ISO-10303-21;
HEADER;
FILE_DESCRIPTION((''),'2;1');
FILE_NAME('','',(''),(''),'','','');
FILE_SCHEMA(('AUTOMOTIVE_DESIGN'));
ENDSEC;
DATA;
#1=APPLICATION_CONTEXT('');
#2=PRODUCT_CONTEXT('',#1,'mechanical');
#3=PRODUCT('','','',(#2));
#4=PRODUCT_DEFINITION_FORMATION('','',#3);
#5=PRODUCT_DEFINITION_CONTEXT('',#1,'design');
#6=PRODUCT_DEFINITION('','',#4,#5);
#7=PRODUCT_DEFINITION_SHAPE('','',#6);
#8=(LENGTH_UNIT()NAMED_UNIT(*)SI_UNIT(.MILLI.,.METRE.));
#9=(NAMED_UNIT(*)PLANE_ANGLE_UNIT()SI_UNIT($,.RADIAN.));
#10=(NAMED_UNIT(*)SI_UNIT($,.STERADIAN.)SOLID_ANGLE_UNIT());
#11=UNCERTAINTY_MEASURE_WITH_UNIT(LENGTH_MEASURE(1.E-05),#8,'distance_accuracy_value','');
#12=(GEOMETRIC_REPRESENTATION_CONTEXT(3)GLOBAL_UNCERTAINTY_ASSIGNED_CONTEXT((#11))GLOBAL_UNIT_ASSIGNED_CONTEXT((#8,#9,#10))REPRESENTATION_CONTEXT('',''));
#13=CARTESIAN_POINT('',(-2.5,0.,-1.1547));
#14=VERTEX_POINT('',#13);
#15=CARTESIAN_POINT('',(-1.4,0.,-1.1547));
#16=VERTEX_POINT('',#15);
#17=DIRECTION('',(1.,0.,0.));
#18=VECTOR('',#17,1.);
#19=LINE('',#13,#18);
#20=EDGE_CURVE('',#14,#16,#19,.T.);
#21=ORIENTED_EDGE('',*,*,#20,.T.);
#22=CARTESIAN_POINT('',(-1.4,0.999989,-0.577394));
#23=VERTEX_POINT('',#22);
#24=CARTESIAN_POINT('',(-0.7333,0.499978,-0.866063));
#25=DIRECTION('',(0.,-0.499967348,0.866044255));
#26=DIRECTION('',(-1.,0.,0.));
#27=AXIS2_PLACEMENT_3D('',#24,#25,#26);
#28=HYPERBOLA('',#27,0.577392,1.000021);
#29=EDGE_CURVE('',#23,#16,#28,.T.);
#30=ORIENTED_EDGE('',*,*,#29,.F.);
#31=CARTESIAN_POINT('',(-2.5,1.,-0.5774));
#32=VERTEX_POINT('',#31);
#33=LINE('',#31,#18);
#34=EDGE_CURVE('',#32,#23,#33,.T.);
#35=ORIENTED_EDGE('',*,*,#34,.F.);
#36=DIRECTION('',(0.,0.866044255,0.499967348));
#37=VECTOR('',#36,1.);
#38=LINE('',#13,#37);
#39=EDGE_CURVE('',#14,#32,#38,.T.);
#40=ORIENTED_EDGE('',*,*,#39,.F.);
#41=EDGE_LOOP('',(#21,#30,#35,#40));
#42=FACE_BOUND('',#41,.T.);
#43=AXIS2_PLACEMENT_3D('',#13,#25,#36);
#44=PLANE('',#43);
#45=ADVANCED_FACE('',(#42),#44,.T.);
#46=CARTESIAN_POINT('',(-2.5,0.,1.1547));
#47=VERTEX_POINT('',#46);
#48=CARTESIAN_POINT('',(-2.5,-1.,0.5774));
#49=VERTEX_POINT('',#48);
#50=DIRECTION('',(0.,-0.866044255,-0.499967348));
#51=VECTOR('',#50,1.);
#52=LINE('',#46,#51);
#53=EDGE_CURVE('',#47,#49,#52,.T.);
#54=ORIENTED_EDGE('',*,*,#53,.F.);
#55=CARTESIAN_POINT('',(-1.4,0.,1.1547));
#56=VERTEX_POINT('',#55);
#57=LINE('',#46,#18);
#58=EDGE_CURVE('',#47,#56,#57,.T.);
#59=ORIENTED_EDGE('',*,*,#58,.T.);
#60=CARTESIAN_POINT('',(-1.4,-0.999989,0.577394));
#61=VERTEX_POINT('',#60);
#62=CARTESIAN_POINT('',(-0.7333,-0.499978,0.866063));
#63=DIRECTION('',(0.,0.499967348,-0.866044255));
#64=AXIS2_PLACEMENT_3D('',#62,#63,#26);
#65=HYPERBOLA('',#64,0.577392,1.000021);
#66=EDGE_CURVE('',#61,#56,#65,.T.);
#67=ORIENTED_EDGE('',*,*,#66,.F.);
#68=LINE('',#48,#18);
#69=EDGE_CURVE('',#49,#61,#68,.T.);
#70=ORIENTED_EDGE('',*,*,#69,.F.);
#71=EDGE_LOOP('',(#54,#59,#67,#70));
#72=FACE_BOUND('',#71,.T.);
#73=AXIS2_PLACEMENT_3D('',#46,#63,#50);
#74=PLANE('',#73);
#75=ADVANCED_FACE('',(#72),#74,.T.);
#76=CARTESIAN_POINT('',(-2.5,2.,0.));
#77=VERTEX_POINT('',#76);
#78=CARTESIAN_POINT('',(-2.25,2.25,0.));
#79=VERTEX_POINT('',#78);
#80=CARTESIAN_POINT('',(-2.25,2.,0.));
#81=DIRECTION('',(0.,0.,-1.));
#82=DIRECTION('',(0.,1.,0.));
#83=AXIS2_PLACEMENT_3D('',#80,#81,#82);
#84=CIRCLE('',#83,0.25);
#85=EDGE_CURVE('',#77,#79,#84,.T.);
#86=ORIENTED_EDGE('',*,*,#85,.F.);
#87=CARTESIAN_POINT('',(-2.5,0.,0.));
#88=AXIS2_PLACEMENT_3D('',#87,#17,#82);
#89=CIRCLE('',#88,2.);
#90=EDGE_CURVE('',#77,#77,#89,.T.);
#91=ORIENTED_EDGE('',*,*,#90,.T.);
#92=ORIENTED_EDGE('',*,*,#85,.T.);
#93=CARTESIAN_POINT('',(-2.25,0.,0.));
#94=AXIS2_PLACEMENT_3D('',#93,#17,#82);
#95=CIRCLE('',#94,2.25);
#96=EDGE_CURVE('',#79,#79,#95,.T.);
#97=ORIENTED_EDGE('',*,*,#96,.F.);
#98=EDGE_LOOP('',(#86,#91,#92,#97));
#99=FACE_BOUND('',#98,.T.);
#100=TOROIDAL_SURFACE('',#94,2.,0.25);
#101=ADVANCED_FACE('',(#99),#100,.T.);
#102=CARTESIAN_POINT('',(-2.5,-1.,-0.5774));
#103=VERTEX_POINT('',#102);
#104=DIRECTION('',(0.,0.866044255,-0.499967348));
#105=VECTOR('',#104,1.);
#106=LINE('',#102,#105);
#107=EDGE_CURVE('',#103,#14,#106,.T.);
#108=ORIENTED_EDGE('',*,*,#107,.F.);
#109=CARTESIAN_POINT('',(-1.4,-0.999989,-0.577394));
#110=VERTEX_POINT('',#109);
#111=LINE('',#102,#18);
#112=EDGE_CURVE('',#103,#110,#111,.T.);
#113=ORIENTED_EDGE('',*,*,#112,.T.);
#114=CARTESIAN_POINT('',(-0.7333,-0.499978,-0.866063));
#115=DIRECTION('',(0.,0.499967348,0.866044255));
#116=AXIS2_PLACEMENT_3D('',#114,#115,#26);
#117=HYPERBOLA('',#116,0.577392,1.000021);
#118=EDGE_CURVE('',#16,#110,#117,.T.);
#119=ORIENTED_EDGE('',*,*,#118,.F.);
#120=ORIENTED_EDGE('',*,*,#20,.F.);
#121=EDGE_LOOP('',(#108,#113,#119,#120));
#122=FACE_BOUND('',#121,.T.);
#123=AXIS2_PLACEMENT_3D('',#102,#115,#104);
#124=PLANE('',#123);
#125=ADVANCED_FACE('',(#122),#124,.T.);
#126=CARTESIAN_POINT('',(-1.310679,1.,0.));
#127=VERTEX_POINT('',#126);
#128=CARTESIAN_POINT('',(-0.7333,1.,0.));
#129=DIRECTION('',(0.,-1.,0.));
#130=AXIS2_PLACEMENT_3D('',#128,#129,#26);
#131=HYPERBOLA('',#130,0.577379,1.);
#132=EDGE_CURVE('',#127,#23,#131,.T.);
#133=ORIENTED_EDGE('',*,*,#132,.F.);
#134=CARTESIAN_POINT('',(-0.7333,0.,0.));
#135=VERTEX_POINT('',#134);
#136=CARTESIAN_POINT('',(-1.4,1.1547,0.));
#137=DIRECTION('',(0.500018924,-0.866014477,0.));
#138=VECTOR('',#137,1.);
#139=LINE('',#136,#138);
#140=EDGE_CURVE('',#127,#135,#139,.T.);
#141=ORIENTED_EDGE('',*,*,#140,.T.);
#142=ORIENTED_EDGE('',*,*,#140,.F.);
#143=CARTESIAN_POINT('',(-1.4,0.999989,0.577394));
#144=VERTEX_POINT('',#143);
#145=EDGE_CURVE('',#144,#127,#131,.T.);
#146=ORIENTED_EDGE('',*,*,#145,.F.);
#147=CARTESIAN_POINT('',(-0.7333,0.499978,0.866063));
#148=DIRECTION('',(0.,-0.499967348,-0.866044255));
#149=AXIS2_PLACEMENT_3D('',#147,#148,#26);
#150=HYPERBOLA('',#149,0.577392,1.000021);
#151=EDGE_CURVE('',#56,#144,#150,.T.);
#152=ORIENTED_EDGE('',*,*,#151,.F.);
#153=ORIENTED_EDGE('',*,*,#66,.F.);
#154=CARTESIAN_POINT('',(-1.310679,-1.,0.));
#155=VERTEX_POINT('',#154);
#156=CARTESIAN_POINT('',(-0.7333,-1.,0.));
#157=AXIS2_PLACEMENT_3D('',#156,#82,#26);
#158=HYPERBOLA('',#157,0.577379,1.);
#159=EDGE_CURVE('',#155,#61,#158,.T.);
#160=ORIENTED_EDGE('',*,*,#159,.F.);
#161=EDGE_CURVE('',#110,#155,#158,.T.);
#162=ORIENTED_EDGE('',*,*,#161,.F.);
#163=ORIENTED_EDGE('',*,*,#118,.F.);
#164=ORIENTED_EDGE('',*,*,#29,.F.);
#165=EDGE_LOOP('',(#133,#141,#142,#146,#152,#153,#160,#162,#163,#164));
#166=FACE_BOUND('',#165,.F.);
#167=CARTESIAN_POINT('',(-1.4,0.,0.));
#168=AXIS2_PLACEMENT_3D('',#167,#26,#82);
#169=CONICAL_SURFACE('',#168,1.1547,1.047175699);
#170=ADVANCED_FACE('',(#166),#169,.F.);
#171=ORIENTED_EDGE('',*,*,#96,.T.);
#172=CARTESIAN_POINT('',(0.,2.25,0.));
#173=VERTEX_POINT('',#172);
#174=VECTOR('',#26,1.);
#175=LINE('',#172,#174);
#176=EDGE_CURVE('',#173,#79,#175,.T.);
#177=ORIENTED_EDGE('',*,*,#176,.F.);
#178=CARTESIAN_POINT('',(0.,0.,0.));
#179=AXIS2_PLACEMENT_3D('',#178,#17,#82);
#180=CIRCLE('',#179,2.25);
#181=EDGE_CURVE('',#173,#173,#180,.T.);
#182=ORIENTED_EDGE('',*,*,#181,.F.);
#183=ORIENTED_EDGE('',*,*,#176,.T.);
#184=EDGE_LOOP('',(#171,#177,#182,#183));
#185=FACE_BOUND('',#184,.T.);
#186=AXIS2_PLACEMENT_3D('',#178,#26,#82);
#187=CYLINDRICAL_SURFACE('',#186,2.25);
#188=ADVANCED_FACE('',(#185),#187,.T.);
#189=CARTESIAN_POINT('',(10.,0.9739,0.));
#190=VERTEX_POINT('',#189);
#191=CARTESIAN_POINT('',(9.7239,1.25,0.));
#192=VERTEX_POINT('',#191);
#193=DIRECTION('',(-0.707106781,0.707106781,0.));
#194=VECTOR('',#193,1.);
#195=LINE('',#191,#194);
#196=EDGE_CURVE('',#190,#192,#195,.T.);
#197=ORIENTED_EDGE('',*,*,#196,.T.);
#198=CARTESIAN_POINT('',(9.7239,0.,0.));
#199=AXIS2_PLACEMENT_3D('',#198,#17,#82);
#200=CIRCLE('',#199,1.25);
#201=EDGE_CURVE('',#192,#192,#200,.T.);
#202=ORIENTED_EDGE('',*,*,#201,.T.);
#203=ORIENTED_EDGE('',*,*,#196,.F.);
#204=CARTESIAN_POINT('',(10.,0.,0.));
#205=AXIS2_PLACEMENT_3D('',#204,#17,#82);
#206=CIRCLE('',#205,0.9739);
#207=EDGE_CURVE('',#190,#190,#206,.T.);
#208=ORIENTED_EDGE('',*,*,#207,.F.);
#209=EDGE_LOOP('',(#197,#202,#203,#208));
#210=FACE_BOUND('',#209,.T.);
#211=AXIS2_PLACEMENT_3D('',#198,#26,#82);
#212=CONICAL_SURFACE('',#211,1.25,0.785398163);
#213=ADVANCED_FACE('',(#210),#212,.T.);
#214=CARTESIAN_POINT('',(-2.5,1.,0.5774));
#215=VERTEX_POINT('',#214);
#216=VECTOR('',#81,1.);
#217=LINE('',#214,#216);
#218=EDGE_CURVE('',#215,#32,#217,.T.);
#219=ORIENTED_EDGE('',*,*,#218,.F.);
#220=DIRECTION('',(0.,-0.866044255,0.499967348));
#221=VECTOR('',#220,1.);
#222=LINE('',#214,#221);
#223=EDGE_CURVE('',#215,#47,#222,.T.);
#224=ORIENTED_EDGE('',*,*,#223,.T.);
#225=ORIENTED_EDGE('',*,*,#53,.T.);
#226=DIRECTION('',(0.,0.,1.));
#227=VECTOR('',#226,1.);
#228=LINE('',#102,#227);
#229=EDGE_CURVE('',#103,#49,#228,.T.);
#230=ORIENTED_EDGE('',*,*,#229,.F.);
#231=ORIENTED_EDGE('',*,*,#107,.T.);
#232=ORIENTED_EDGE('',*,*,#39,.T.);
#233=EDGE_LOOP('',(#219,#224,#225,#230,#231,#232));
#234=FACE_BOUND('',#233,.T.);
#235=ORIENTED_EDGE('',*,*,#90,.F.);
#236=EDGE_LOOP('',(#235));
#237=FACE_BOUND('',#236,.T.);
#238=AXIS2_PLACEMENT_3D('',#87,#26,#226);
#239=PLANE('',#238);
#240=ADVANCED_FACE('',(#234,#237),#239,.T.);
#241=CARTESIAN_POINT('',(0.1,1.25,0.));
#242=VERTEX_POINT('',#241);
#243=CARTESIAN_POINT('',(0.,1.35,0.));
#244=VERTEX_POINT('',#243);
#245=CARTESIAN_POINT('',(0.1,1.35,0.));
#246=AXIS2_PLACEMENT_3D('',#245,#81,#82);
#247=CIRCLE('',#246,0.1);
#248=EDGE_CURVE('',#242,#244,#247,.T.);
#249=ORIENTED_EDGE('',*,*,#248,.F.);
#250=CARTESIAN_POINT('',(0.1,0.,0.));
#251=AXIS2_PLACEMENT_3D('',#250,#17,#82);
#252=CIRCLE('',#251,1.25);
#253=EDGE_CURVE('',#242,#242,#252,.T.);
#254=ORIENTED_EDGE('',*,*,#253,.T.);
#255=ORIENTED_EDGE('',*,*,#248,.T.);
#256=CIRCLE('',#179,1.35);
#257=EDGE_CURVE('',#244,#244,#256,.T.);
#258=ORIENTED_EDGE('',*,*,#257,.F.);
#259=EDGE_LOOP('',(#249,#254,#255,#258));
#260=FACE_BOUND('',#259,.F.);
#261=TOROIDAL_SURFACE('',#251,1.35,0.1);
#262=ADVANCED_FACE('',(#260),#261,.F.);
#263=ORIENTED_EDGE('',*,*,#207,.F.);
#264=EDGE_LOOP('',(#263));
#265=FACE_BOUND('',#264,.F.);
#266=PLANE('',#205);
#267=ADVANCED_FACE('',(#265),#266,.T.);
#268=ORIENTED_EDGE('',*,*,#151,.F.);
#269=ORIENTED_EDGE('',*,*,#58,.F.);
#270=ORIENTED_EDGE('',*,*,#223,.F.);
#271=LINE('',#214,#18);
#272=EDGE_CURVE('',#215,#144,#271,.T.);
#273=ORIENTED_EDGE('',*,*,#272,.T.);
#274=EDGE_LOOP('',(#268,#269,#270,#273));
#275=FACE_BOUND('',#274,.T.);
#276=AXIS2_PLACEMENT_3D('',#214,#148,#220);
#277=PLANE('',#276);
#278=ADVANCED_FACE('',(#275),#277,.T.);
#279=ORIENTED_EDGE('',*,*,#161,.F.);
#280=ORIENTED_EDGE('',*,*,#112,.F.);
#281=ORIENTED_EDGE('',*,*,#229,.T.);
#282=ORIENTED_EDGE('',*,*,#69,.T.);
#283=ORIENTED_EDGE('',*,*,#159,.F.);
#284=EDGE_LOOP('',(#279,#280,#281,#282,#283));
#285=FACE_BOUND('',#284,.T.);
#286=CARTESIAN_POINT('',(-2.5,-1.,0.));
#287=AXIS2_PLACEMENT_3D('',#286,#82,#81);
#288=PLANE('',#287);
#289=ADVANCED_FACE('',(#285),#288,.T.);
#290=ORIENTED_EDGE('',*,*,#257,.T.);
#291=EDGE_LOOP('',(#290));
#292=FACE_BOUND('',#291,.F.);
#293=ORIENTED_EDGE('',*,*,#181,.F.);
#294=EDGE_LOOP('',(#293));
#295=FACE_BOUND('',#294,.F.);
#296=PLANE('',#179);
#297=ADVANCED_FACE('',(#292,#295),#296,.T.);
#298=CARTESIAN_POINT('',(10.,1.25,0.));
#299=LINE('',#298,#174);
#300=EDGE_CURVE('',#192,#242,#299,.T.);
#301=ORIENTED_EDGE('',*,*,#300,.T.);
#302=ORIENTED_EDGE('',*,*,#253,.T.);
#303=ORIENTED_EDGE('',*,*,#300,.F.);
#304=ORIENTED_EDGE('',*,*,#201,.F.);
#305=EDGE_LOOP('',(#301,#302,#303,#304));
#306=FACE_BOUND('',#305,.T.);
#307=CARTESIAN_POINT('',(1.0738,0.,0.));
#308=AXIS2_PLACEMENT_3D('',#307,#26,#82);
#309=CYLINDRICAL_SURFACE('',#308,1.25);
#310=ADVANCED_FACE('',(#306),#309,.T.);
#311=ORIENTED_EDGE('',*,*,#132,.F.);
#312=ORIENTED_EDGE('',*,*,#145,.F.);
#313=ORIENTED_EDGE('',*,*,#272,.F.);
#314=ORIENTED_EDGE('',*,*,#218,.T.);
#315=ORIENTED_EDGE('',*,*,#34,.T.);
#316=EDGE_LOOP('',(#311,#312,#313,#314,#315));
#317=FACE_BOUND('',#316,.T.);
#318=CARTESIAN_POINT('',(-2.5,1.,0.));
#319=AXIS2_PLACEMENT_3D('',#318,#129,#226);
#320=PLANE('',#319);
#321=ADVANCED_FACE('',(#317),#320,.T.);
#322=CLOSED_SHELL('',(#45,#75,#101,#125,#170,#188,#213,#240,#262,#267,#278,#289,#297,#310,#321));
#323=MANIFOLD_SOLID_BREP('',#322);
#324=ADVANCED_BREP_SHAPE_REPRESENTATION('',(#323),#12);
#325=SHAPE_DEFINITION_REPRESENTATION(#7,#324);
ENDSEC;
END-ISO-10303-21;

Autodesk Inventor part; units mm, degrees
ref_plane "YZ Plane" through (0, 0, 0) normal (1, 0, 0) x (0, 1, 0)
ref_plane "XZ Plane" through (0, 0, 0) normal (0, 1, 0) x (-1, 0, 0)
sketch "Skizze1" plane through (0, 0, 0) normal (0, 0, 1) x (1, 0, 0)
  line L0 (-0.7333, 0) -> (10, 0)
  line L1 (10, 0) -> (10, 1.25)
  line L2 (10, 1.25) -> (1.35, 1.25)
  line L3 (1.35, 1.25) -> (1.0738, 1.25)
  line L4 (1.0738, 1.25) -> (0, 1.25)
  line L5 (0, 1.25) -> (0, 2.25)
  line L6 (0, 2.25) -> (-2.5, 2.25)
  line L7 (-2.5, 2.25) -> (-2.5, 1.1547)
  line L8 (-2.5, 1.1547) -> (-1.4, 1.1547)
  line L9 (-1.4, 1.1547) -> (-0.7333, 0)
  line L10 (-5, 0) -> (12.5, 0) projected
  line L11 (0, -0.45) -> (0, 2.7) projected
  line L12 (1.35, 1.25) -> (0, 1.25) construction
  dimension "d1" = 8.65
  dimension "d2" = 0.2762
  dimension "d3" = 2.5
  dimension "d4" = 1.1
  dimension "d5" = 60
  dimension "d6" = 2.5
  dimension "d7" = 2.5
  dimension "d8" = 2.3094
  dimension "d9" = 4.5
  dimension "d26" = 10
revolve "Körper" add sketch "Skizze1" angle 360 about axis through (-0.7333, 0, 0) along (1, 0, 0)
sketch "Skizze2" plane through (-2.5, 0, 0) normal (-1, 0, 0) x (0, 0, 1)
  circle A0 centre (0, 0) radius 1.1547 projected
  line L0 (0, -3.15) -> (0, 3.15) projected
  line L1 (-3.15, 0) -> (3.15, 0) projected
  line L2 (1.1547, 0) -> (0.5774, -1)
  line L3 (0.5774, -1) -> (-0.5774, -1)
  line L4 (-0.5774, -1) -> (-1.1547, 0)
  line L5 (-1.1547, 0) -> (-0.5774, 1)
  line L6 (-0.5774, 1) -> (0.5774, 1)
  line L7 (0.5774, 1) -> (1.1547, 0)
extrude "Loch" add sketch "Skizze2" against normal up to next contours L7 A0 | A0 L2 | L6 L0 A0 | A0 L0 L3 | L0 L6 A0 | A0 L3 L0 | L4 A0 | A0 L5
fillet "Rundung1" radius 0.25 1 edges at (-2.5, -2.25, 0)
thread "Gewinde" size "M2.5x0.45" class "6g" standard "ISO Metric profile" length 8.65
chamfer "Fase1" distance 0.2761 distance2 0.2761 1 edges at (10, -1.25, 0) measured on face at (10, -0.2714, -0.6096)
ref_plane "Work Plane1" through (29, 0, 0) normal (0, -1, 0) x (1, 0, 0)
fillet "Fillet2" radius 0.1 1 edges at (0, -1.25, 0)
equation "\"d1\" = GEL"
equation "\"d3\" = KOH"
equation "\"d4\" = INTI"
equation "\"d6\" = GD"
equation "\"d7\" = BDM"
equation "\"d8\" = 1.1547 * SW"
equation "\"d9\" = KOD"
equation "\"d26\" = NLG"
equation "\"d30\" = R"
equation "\"d17\" = RR"
equation "\"d13\" = GEL"
equation "\"d15\" = -0.5 * SPD + 0.5 * GD"
equation "\"d16\" = GUL"
equation "\"GD\" = 2.5"
equation "\"NLG\" = 10"
equation "\"GEL\" = 8.65"
equation "\"KOD\" = 4.5"
equation "\"KOH\" = 2.5"
equation "\"INTI\" = 1.1"
equation "\"GAL\" = 0.61345 * PTC"
equation "\"GUL\" = 0.61345 * PTC"
equation "\"BDM\" = NND"
equation "\"SW\" = 2"
equation "\"RR\" = 0.25"
equation "\"SPD\" = NND - 1.2269 * PTC"
equation "\"R\" = 0.1"
equation "\"TOA\" = 30deg"
equation "\"GD1\" = THREADDIA - 1.2269 * PTC"
equation "\"THREADDIA\" = 2.5"
equation "\"FAWI\" = 45deg"
equation "\"PTC\" = 0.45"
equation "\"NND\" = 2.5"
equation "\"E0\" = 1.155 * SW"
properties part number "ISO 4762  - M2,5 x 10" material "Edelstahl, 440C"
